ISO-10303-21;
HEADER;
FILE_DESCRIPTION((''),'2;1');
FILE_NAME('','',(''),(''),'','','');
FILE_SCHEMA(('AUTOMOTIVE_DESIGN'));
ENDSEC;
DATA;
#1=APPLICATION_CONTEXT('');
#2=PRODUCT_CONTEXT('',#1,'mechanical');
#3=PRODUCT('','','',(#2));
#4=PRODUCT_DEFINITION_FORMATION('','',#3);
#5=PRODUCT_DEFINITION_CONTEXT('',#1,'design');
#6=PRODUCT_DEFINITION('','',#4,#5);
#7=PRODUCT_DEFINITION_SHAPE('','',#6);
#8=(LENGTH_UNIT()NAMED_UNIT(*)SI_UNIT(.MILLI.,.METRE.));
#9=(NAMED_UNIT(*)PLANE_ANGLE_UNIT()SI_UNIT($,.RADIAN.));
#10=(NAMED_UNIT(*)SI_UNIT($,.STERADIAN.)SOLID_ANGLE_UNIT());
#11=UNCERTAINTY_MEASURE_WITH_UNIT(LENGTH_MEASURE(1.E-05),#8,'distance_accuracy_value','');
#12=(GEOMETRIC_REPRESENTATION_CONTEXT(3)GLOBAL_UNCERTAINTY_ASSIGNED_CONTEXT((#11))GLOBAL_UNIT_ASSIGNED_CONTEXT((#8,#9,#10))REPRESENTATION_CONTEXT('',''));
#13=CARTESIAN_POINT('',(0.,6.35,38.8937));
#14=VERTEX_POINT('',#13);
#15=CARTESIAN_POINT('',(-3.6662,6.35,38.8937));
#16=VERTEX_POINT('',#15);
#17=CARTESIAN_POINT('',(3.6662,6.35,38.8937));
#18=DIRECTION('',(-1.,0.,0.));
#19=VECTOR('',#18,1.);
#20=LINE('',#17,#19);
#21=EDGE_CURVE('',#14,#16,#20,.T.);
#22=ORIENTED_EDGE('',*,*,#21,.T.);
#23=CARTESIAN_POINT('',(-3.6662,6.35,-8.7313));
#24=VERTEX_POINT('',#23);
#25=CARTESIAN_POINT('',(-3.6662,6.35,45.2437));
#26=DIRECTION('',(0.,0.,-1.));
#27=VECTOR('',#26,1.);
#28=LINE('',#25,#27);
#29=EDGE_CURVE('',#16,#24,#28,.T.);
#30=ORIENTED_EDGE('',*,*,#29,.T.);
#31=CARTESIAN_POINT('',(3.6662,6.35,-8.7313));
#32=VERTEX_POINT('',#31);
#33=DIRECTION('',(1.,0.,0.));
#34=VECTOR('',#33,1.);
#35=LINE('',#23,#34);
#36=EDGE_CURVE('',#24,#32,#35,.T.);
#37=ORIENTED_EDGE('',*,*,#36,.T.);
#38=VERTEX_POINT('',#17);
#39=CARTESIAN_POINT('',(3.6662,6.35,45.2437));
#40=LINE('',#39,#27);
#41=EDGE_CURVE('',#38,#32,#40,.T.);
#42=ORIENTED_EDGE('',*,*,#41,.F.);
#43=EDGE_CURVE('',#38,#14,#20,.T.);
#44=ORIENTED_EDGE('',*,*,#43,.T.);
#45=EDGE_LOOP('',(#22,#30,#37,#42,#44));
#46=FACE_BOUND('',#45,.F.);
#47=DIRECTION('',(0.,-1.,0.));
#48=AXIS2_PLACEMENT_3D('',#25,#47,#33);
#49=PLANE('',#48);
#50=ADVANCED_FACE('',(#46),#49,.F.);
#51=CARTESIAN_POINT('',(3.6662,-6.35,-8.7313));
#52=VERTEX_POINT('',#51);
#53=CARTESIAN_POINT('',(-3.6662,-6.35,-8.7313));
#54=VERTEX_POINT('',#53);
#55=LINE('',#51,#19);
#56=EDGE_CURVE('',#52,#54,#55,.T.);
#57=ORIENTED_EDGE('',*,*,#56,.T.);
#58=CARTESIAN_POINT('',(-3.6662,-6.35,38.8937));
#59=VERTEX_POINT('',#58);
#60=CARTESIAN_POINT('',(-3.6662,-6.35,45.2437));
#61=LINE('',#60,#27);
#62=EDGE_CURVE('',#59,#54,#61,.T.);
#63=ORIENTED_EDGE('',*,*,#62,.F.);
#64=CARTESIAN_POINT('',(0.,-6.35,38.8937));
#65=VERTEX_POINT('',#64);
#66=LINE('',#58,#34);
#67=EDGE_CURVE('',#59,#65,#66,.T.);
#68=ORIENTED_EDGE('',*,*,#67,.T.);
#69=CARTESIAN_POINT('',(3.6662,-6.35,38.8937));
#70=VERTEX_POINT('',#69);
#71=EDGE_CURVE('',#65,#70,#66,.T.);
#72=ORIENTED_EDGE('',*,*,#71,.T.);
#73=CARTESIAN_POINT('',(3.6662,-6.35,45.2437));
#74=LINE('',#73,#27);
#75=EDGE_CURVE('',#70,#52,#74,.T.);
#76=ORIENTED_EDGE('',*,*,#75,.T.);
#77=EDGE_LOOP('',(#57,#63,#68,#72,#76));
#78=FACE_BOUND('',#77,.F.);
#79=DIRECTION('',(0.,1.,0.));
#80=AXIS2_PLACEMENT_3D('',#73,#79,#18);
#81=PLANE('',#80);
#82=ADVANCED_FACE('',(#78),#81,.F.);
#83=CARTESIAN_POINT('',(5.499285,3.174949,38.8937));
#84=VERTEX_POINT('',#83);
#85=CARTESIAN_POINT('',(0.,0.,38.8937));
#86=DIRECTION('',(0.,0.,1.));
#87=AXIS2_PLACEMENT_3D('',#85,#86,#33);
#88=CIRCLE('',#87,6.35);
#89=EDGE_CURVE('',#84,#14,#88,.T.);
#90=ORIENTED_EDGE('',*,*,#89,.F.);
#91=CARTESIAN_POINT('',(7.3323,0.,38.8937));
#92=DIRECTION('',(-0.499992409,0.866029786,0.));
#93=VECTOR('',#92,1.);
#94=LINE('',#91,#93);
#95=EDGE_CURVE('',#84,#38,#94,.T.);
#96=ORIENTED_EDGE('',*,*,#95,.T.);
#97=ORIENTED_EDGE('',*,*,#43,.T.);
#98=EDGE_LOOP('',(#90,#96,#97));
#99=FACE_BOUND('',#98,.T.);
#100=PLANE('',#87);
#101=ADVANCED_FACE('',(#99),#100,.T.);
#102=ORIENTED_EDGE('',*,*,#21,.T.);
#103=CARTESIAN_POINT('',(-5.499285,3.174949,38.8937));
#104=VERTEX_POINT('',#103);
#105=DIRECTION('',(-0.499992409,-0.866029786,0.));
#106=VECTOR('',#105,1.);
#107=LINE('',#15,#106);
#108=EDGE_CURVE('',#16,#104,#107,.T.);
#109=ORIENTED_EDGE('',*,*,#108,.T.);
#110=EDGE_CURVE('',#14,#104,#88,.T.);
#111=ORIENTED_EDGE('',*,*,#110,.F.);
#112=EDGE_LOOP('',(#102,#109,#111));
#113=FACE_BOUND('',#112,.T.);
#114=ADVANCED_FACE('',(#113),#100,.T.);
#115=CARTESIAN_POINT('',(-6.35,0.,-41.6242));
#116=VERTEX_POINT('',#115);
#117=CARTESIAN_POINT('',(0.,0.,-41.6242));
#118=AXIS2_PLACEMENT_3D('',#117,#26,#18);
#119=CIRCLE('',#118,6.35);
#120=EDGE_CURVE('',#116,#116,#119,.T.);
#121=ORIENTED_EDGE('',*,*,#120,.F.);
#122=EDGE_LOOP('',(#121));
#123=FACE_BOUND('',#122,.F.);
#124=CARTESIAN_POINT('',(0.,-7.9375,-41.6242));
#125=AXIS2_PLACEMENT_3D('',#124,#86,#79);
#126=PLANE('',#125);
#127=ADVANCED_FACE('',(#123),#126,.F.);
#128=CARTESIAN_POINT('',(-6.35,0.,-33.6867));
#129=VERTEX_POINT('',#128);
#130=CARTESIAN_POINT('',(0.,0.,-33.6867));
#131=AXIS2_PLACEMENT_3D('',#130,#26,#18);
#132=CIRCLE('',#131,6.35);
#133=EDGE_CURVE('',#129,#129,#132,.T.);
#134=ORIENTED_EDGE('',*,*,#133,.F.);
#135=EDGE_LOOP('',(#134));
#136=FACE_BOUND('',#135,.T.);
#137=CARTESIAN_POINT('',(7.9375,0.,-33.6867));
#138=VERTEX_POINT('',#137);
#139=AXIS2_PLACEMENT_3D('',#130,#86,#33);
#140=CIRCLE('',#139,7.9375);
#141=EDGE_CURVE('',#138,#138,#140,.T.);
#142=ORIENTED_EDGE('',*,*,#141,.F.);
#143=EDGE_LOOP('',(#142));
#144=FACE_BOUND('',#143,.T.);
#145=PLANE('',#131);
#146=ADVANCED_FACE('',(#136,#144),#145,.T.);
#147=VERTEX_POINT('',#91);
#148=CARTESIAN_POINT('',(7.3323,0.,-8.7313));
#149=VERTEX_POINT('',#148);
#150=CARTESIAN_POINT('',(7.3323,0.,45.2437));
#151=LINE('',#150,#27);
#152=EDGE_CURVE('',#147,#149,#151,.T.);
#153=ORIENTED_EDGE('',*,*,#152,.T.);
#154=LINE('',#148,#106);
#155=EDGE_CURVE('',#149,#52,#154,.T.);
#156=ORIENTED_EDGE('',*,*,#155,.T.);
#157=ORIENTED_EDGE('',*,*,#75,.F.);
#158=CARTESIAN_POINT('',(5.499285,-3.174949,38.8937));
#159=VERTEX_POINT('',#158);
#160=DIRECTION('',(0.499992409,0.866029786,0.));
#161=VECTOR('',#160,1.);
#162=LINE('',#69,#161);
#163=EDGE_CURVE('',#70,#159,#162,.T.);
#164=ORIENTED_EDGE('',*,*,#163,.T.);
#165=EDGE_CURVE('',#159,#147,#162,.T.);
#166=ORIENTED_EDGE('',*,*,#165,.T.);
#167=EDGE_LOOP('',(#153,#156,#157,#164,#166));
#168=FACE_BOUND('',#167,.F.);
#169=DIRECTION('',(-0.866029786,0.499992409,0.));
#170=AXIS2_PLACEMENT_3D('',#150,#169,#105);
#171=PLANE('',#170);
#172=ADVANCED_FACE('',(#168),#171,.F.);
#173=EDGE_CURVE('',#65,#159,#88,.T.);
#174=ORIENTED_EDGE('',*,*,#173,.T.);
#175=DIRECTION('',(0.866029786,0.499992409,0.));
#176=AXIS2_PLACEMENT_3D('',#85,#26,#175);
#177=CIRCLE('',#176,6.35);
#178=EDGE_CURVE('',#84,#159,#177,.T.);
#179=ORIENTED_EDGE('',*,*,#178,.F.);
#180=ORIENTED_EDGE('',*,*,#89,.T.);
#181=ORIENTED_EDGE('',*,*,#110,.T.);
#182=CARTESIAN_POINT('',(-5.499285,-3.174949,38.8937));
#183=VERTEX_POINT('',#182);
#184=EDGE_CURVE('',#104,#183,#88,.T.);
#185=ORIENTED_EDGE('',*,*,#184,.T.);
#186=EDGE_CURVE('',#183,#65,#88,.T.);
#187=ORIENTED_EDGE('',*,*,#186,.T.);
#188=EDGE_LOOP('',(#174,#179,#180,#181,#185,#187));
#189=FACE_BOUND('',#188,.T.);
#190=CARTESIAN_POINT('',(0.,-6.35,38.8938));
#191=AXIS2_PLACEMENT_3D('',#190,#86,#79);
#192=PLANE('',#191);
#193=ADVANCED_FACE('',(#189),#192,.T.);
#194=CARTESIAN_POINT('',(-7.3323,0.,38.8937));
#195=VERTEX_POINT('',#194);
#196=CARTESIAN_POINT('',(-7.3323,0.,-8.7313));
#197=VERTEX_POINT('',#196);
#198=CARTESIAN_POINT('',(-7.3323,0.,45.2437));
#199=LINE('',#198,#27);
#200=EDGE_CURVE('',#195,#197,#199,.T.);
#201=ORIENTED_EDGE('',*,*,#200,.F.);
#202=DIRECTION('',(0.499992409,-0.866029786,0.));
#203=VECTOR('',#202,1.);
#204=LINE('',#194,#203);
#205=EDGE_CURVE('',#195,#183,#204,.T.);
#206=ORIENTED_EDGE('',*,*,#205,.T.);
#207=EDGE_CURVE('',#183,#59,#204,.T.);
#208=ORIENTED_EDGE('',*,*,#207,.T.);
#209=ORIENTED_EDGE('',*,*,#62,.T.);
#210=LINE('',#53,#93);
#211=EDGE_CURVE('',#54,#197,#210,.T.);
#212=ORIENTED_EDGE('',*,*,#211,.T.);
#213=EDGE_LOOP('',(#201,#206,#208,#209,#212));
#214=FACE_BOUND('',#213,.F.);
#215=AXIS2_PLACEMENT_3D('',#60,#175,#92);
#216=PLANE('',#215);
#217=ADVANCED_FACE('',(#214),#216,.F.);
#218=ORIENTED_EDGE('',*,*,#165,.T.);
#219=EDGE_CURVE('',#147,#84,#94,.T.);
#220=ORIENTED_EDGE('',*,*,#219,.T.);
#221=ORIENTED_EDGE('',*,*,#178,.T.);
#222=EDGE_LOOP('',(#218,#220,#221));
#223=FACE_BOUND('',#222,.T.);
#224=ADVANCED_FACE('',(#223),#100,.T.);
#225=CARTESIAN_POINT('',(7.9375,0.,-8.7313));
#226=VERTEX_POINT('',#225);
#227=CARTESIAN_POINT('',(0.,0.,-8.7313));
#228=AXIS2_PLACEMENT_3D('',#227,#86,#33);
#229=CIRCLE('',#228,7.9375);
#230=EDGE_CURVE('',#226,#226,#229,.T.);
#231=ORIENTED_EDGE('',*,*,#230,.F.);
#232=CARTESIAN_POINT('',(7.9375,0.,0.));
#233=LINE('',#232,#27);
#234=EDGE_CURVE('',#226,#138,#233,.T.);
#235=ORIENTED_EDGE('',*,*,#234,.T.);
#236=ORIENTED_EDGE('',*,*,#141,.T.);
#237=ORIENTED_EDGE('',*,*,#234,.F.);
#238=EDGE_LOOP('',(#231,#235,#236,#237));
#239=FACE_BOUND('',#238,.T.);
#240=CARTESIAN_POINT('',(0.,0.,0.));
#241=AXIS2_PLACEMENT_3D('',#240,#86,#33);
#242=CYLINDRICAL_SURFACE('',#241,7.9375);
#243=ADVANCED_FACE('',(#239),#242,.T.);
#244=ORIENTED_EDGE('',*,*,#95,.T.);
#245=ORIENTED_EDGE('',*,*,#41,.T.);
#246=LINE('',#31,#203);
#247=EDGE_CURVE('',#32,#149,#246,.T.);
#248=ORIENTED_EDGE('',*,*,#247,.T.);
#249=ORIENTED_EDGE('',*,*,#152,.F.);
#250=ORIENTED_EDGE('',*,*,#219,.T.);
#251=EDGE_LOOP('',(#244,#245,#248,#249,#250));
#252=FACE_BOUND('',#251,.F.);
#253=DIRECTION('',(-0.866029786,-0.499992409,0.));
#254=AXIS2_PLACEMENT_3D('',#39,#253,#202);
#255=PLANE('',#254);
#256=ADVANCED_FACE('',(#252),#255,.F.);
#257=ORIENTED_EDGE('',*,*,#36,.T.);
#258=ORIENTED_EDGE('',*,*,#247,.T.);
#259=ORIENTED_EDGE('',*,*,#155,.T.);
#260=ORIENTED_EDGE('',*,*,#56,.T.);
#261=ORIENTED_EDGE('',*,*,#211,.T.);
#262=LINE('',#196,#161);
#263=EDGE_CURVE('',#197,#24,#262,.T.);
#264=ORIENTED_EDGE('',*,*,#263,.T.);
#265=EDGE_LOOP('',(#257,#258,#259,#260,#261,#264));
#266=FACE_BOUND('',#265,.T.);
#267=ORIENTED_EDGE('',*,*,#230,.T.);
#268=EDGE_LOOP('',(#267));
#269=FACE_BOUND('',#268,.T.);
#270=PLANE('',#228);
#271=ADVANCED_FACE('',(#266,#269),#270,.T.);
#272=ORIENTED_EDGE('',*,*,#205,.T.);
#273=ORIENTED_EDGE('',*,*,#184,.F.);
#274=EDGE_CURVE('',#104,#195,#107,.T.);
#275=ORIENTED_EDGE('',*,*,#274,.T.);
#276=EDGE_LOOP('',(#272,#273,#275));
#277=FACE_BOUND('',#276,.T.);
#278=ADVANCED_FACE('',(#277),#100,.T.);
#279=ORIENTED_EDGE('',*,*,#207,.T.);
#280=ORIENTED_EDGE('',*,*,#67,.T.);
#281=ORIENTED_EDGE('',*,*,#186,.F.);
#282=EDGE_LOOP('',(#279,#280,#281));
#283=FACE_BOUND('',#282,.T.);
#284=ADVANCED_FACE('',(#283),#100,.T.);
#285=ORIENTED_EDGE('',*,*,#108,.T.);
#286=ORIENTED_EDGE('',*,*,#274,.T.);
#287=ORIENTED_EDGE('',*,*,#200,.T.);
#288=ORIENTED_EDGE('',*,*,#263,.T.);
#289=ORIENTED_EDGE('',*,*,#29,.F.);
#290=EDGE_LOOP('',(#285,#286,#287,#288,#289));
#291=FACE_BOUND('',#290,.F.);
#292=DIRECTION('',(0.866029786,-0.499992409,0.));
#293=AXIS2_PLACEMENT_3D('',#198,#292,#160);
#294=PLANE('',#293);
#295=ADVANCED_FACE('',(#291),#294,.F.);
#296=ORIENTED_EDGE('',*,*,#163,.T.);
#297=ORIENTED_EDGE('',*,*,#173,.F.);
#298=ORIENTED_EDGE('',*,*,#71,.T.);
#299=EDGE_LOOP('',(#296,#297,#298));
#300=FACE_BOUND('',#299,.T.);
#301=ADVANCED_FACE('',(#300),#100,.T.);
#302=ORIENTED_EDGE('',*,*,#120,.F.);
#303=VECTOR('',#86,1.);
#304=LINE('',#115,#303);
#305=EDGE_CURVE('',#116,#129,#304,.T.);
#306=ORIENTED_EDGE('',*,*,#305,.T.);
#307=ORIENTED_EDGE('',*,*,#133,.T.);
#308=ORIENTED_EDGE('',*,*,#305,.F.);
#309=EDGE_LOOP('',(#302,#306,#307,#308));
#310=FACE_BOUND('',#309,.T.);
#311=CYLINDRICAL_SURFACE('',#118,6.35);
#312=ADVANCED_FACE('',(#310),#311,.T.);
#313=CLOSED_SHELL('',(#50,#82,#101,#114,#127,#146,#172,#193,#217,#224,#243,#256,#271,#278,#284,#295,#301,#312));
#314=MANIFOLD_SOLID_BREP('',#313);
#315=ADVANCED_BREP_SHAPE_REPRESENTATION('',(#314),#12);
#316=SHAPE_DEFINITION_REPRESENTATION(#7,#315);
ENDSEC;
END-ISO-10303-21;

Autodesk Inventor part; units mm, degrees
ref_plane "YZ Plane" through (0, 0, 0) normal (1, 0, 0) x (0, 1, 0)
ref_plane "XZ Plane" through (0, 0, 0) normal (0, 1, 0) x (-1, 0, 0)
ref_plane "XY Plane" through (0, 0, 0) normal (0, 0, 1) x (1, 0, 0)
sketch "Sketch1" plane through (0, 0, 0) normal (0, 0, 1) x (1, 0, 0)
  circle A0 centre (0, 0) radius 7.9375
  dimension "d0" = 15.875
extrude "Extrusion1" add sketch "Sketch1" along normal mid plane 90.4875
sketch "Sketch2" plane through (0, 0, 45.2437) normal (0, 0, 1) x (1, 0, 0)
  line L0 (-3.6662, 6.35) -> (3.6662, 6.35)
  line L1 (3.6662, 6.35) -> (7.3323, 0)
  line L2 (7.3323, 0) -> (3.6662, -6.35)
  line L3 (3.6662, -6.35) -> (-3.6662, -6.35)
  line L4 (-3.6662, -6.35) -> (-7.3323, 0)
  line L5 (-7.3323, 0) -> (-3.6662, 6.35)
  circle A0 centre (0, 0) radius 7.9375 projected
  point P0 (0, -6.35)
  point P1 (0, 6.35)
  dimension "d3" = 12.7
extrude "Extrusion2" cut sketch "Sketch2" against normal blind 53.975
sketch "Sketch3" plane through (0, 0, 45.2437) normal (0, 0, 1) x (1, 0, 0)
  circle A0 centre (0, 0) radius 6.35
  circle A1 centre (0, 0) radius 7.9375 projected
  line L0 (3.6662, 6.35) -> (-3.6662, 6.35) projected
  line L1 (7.3323, 0) -> (3.6662, 6.35) projected
  line L2 (3.6662, -6.35) -> (7.3323, 0) projected
  line L3 (-3.6662, -6.35) -> (3.6662, -6.35) projected
  line L4 (-7.3323, 0) -> (-3.6662, -6.35) projected
  line L5 (-3.6662, 6.35) -> (-7.3323, 0) projected
  point P0 (-5.4993, 3.175)
  point P1 (0, 6.35)
  point P2 (-5.4993, -3.175)
  point P3 (0, -6.35)
  point P4 (5.4993, -3.175)
  point P5 (5.4993, 3.175)
  dimension "d6" = 12.7
extrude "Extrusion3" cut sketch "Sketch3" against normal blind 6.35 contours A0 L1 L2 | A0 L0 L1 | L2 L3 A0 | A0 L5 L0 | L3 L4 A0 | A0 L4 L5
sketch "Sketch6" plane through (0, 0, 0) normal (1, 0, 0) x (0, 1, 0)
  line L0 (7.9375, -45.2437) -> (-7.9375, -45.2437) construction
  line L1 (-7.9375, -45.2437) -> (-7.9375, -8.7312) construction
  line L2 (-7.9375, -8.7312) -> (-6.35, -8.7312) construction
  line L3 (-6.35, -8.7312) -> (-6.35, 38.8938) construction
  line L4 (-6.35, 38.8938) -> (-6.35, 45.2437) construction
  line L5 (-6.35, 45.2437) -> (6.35, 45.2437) construction
  line L6 (6.35, 45.2437) -> (6.35, 38.8938) construction
  line L7 (6.35, 38.8938) -> (6.35, -8.7312) construction
  line L8 (6.35, -8.7312) -> (7.9375, -8.7312) construction
  line L9 (7.9375, -8.7312) -> (7.9375, -45.2437) construction
  line L10 (6.35, 45.2437) -> (-6.35, 45.2437)
  line L11 (-6.35, 45.2437) -> (-6.35, 38.8938)
  line L12 (-6.35, 38.8938) -> (6.35, 38.8938)
  line L13 (6.35, 38.8938) -> (6.35, 45.2437)
  line L14 (7.9375, -45.2437) -> (-7.9375, -45.2437) construction
  line L15 (-7.9375, -45.2437) -> (-7.9375, -8.7312) construction
  line L16 (-7.9375, -8.7312) -> (-6.35, -8.7312) construction
  line L17 (-6.35, -8.7312) -> (-6.35, 38.8938) construction
  line L18 (-6.35, 38.8938) -> (-6.35, 45.2437) construction
  line L19 (-6.35, 45.2437) -> (6.35, 45.2437) construction
  line L20 (6.35, 45.2437) -> (6.35, 38.8938) construction
  line L21 (6.35, 38.8938) -> (6.35, -8.7312) construction
  line L22 (6.35, -8.7312) -> (7.9375, -8.7312) construction
  line L23 (7.9375, -8.7312) -> (7.9375, -45.2437) construction
  line L24 (3.175, 38.8938) -> (6.35, 38.8938) construction
  line L25 (6.35, 38.8938) -> (-4.3066, 38.8938) construction
  line L26 (-3.175, 38.8938) -> (-6.35, 38.8938) construction
  line L27 (-7.9375, -45.2437) -> (-7.9375, -8.7312) construction
  line L28 (7.9375, -45.2437) -> (-7.9375, -45.2437)
  line L29 (-7.9375, -45.2437) -> (-7.9375, -41.6242)
  line L30 (-7.9375, -41.6242) -> (7.9375, -41.6242)
  line L31 (7.9375, -41.6242) -> (7.9375, -45.2437)
  point P0 (0, 0)
  dimension "d15" = 80.518
extrude "Extrusion6" cut sketch "Sketch6" along normal through all both and the other way through all
sketch "Sketch7" plane through (0, 0, -41.6242) normal (0, 0, -1) x (-1, 0, 0)
  circle A0 centre (0, 0) radius 6.35
  circle A1 centre (0, 0) radius 7.9375 construction
  circle A2 centre (0, 0) radius 7.9375
  circle A3 centre (0, 0) radius 7.9375 construction
  dimension "d18" = 12.7
extrude "Extrusion7" cut sketch "Sketch7" against normal blind 7.9375
properties part number "EL2-C2-003" material "Aluminum 6061"
